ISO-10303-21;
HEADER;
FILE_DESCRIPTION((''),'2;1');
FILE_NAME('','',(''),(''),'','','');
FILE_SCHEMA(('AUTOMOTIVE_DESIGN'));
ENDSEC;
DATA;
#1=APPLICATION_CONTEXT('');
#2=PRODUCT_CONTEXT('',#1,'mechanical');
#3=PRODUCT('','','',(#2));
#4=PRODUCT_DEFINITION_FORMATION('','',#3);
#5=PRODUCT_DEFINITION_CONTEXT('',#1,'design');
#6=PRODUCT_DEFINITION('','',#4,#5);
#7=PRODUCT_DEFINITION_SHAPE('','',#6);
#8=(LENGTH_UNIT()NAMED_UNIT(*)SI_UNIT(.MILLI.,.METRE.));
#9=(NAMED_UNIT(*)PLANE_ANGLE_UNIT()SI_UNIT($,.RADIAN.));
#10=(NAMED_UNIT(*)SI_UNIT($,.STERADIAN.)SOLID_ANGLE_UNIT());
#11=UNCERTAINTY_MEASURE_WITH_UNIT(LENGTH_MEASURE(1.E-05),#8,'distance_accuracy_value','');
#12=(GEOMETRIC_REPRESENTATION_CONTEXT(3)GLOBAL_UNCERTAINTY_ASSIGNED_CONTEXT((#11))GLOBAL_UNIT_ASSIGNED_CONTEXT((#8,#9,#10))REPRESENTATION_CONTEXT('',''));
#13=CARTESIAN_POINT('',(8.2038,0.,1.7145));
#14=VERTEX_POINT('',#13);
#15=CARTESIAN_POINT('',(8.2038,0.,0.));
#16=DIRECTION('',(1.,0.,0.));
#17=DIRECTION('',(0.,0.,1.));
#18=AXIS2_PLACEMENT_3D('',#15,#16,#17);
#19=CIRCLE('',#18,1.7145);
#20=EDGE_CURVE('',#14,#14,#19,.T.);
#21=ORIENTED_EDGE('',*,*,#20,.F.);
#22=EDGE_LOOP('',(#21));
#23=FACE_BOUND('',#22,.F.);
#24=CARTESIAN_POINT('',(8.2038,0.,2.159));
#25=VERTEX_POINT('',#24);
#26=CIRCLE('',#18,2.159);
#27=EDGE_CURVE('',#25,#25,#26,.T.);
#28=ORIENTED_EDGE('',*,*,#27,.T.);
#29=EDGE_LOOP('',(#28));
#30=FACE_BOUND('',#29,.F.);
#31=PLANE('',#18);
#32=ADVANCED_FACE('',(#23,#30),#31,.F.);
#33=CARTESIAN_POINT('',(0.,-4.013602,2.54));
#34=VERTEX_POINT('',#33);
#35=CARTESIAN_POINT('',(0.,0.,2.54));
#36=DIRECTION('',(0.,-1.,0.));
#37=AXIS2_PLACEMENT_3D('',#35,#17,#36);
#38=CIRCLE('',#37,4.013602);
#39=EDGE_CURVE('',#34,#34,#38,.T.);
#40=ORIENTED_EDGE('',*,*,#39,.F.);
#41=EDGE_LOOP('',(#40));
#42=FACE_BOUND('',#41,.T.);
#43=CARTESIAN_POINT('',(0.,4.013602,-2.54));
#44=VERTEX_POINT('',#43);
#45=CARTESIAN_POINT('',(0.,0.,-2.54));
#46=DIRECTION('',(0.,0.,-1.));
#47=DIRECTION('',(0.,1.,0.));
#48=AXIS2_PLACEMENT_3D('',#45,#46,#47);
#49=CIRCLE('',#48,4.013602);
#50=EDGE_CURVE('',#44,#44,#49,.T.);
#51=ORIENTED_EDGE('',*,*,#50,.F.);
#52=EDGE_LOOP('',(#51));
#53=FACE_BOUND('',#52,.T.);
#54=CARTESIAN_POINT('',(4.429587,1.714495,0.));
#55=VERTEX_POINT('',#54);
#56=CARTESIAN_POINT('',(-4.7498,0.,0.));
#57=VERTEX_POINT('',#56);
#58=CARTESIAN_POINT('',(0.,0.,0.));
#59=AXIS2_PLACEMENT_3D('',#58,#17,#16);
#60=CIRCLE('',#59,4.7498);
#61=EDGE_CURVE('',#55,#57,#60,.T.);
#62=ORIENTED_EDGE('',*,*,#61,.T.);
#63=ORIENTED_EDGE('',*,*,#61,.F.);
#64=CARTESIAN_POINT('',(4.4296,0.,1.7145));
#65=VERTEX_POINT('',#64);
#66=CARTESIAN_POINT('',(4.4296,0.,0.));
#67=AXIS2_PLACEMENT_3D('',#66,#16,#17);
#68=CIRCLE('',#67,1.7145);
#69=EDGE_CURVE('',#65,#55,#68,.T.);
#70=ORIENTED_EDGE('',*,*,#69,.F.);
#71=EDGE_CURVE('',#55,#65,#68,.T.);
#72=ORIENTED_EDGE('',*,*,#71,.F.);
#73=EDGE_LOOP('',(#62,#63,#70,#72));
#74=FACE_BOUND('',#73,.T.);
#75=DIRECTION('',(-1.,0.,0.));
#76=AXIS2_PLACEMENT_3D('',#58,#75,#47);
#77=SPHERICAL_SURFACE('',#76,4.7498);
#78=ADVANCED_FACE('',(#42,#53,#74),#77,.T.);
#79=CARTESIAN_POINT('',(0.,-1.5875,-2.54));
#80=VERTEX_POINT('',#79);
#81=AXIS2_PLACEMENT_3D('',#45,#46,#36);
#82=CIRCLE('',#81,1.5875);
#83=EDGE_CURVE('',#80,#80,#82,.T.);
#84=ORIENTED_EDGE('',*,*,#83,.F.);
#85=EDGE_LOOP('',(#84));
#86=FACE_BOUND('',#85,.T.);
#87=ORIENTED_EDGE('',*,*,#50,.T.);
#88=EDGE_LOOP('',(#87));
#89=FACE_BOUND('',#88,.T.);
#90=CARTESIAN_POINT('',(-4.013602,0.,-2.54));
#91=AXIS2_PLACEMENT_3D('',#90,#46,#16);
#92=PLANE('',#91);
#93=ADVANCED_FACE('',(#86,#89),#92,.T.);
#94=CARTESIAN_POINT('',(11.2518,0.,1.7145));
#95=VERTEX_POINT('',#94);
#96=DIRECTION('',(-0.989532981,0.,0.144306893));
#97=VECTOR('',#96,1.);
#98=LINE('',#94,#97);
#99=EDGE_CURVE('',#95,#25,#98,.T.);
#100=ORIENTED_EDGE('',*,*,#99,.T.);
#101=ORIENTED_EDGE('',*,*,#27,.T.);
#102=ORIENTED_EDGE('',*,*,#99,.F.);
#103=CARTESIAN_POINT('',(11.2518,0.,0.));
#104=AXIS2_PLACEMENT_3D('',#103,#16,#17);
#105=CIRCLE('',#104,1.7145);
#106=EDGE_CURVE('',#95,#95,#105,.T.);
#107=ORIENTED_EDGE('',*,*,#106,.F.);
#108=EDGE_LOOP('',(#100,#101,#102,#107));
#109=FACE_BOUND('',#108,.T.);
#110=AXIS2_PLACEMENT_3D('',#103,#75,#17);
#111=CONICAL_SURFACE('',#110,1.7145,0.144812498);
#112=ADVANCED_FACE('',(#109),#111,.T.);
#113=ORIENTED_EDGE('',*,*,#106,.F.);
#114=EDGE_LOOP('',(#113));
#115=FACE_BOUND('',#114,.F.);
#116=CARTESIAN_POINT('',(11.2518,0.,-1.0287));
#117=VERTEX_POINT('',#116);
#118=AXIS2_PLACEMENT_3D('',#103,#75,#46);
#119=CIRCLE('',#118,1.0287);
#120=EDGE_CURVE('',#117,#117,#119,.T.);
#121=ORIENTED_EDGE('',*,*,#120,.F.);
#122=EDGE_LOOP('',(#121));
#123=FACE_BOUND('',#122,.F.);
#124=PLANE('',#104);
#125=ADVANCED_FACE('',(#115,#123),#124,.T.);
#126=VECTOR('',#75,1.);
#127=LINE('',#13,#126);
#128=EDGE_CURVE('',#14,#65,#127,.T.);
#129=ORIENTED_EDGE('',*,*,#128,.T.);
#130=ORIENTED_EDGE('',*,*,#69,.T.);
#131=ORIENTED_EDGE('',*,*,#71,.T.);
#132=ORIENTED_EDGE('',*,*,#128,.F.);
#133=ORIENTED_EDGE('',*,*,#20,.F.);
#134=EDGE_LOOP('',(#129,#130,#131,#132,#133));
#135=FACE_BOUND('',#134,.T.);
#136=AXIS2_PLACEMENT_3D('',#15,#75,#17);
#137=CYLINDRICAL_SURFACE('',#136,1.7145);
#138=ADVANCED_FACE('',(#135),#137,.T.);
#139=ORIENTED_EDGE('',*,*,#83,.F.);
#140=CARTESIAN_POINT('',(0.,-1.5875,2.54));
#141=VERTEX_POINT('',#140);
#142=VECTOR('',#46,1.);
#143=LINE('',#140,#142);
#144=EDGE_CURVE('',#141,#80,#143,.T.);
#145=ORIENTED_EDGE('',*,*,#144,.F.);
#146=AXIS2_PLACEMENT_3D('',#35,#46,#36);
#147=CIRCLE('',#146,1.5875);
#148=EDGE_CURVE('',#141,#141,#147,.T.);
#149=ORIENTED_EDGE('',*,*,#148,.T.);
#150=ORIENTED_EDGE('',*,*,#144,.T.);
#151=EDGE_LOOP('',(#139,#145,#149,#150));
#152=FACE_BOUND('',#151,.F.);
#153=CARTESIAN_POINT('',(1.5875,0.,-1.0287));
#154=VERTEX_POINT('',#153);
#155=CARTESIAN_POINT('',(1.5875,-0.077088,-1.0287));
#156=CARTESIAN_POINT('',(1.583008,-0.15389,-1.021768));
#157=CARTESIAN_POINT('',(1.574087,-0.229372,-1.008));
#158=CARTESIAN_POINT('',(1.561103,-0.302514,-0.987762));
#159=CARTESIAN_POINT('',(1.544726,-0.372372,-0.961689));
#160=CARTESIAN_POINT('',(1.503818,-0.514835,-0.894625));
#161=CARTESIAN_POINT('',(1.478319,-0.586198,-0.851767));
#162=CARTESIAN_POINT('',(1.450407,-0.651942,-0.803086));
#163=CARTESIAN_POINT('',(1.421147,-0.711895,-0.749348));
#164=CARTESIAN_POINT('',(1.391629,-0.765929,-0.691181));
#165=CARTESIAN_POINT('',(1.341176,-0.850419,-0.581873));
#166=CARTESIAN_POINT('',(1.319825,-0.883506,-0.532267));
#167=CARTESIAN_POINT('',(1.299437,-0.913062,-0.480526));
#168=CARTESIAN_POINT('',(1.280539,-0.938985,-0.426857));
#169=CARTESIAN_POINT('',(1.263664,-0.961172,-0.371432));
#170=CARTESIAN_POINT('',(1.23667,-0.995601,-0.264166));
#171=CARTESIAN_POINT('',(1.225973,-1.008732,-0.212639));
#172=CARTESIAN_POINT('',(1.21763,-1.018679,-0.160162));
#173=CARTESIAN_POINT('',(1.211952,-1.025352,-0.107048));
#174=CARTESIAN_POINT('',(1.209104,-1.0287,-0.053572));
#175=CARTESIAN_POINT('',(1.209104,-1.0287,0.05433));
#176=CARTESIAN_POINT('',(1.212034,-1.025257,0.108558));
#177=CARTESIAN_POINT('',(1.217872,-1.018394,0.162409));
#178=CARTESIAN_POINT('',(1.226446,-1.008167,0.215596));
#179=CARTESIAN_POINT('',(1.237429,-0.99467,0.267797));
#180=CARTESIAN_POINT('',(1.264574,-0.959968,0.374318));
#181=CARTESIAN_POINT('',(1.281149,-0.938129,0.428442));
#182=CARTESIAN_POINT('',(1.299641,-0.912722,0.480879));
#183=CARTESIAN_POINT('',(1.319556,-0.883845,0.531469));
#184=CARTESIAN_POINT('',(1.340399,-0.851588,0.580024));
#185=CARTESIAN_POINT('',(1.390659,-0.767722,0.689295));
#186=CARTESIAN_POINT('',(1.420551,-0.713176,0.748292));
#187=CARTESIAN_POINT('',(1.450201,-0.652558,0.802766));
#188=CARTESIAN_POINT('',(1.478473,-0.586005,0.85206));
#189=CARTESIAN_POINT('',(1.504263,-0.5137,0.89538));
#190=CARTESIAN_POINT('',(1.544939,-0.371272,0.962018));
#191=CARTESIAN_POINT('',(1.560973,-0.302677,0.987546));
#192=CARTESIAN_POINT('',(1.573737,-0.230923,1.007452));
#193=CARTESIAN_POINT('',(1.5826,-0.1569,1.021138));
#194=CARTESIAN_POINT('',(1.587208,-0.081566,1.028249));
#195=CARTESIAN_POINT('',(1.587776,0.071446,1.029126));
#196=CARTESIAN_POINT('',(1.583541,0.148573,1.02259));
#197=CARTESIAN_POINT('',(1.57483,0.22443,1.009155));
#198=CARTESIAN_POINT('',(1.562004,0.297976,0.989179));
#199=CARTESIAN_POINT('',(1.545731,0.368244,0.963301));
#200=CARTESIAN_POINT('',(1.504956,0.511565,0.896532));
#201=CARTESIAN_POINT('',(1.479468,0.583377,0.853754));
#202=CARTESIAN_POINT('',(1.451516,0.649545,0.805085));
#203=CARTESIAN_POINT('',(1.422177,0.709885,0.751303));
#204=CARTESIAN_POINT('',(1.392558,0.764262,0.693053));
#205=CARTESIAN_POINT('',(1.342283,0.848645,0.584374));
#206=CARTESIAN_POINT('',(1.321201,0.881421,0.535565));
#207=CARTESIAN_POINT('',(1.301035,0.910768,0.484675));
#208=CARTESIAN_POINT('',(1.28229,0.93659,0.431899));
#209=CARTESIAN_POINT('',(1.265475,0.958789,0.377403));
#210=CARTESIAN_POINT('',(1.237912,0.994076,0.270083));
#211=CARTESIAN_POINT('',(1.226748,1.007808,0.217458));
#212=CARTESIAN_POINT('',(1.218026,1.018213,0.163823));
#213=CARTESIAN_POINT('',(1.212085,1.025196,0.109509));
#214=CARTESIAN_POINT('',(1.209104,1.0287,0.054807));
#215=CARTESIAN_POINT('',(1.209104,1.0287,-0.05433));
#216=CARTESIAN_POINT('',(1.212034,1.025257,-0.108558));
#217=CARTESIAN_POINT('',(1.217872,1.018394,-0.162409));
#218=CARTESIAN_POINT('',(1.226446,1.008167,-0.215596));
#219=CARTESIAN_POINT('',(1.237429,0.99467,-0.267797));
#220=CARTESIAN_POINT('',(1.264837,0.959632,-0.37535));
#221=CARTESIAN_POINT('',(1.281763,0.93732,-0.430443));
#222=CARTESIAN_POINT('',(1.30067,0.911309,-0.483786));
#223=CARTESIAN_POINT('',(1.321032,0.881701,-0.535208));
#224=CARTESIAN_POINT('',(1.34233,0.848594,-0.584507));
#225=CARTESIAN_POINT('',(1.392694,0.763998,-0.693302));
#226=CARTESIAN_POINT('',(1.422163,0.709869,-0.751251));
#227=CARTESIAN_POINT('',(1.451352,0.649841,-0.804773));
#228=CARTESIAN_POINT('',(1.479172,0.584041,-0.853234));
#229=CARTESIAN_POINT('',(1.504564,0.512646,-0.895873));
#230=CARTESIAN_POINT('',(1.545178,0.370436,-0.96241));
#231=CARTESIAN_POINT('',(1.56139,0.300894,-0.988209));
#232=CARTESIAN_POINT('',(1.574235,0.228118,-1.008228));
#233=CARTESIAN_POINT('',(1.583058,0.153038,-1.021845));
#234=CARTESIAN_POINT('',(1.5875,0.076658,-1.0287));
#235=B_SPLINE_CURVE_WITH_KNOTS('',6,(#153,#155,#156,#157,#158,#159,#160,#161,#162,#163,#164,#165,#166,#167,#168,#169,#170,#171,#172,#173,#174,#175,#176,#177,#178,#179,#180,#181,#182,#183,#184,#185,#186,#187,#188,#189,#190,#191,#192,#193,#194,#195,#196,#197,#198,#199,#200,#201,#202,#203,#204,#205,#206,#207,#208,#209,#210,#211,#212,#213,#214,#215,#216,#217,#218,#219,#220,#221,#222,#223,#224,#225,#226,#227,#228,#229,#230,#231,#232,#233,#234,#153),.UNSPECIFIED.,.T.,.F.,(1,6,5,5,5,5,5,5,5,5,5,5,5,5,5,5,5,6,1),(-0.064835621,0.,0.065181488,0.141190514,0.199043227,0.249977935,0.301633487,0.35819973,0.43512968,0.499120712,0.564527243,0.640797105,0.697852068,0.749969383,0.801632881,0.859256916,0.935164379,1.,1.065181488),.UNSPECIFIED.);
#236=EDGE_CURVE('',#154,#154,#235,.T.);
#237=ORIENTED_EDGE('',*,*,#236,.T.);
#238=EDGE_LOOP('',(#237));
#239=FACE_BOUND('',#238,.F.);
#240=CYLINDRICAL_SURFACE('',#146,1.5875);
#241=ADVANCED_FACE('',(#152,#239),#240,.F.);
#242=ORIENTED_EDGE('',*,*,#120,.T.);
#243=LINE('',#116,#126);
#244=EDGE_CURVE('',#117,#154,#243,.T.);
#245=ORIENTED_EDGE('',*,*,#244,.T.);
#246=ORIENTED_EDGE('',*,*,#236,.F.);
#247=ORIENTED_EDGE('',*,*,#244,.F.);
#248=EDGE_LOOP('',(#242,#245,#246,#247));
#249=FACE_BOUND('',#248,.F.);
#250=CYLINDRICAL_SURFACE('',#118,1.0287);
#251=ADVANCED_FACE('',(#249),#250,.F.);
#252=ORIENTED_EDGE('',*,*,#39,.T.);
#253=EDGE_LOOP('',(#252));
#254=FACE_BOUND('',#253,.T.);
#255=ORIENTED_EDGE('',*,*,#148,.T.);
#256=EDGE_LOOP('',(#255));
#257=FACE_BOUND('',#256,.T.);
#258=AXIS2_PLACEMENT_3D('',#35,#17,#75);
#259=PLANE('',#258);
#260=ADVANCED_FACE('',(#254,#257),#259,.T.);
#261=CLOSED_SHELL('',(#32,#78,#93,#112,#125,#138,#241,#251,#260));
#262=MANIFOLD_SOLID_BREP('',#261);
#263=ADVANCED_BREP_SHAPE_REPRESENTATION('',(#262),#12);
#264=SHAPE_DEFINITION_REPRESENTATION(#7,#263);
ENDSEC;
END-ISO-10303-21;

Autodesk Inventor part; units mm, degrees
ref_plane "YZ Plane" through (0, 0, 0) normal (1, 0, 0) x (0, 1, 0)
ref_plane "XZ Plane" through (0, 0, 0) normal (0, 1, 0) x (-1, 0, 0)
ref_plane "XY Plane" through (0, 0, 0) normal (0, 0, 1) x (1, 0, 0)
sketch "Sketch2" plane through (0, 0, 0) normal (0, 0, 1) x (1, 0, 0)
  circle A0 centre (0, 0) radius 4.7498
  line L0 (4.7498, 0) -> (-4.7498, 0)
  dimension "d1" = 4.7498
revolve "Revolution1" add sketch "Sketch2" angle 360 about axis through (4.7498, 0, 0) along (-1, 0, 0) picked at (-0.543, 3.0005) contours L0 A0
sketch "Sketch3" plane through (0, 0, 0) normal (0, 1, 0) x (-1, 0, 0)
  arc A0 (0, 4.7498) -> (0, -4.7498) centre (0, 0) ccw projected
  arc A1 (0, -4.7498) -> (0, 4.7498) centre (0, 0) ccw projected
  line L0 (-4.7498, 2.54) -> (4.7498, 2.54)
  line L1 (4.7498, 2.54) -> (4.7498, -2.54)
  line L2 (4.7498, -2.54) -> (-4.7498, -2.54)
  line L3 (-4.7498, -2.54) -> (-4.7498, 2.54)
  line L4 (0, 0) -> (0, 2.54)
  line L5 (-4.7498, 2.54) -> (4.7498, 2.54)
  line L6 (4.7498, 2.54) -> (4.7498, 4.7498)
  line L7 (4.7498, 4.7498) -> (-4.7498, 4.7498)
  line L8 (-4.7498, 4.7498) -> (-4.7498, 2.54)
  line L9 (-4.7498, -2.54) -> (4.7498, -2.54)
  line L10 (4.7498, -2.54) -> (4.7498, -4.7498)
  line L11 (4.7498, -4.7498) -> (-4.7498, -4.7498)
  line L12 (-4.7498, -4.7498) -> (-4.7498, -2.54)
  dimension "d3" = 5.08
  dimension "d5" = 2.54
extrude "Extrusion1" cut sketch "Sketch3" along normal mid plane 25.4 contours A1 L0 A0 | L7 L6 L0 A1 | A0 L0 L8 L7 | L2 A1 A0 | A0 L11 L12 L2 | L2 L10 L11 A1
sketch "Sketch5" plane through (0, 0, 0) normal (0, 1, 0) x (-1, 0, 0)
  line L0 (4.0136, -2.54) -> (-4.0136, -2.54) projected
  arc A0 (-4.0136, 2.54) -> (-4.0136, -2.54) centre (0, 0) ccw projected
  line L1 (-4.0136, 2.54) -> (4.0136, 2.54) projected
  arc A1 (4.0136, -2.54) -> (4.0136, 2.54) centre (0, 0) ccw projected
  line L2 (0, 0) -> (-18.5035, 0)
  line L3 (-11.2518, 0) -> (-11.2518, 1.7145)
  line L4 (-11.2518, 1.7145) -> (-8.2038, 2.159)
  line L5 (-8.2038, 2.159) -> (-8.2038, 1.7145)
  line L6 (-8.2038, 1.7145) -> (-4.4296, 1.7145)
  line L7 (-4.4296, 1.7145) -> (-4.4296, 0)
  line L8 (-11.2518, 0) -> (-4.4296, 0)
  dimension "d12" = 4.0136
  dimension "d15" = 3.429
  dimension "d16" = 4.318
  dimension "d17" = 15.2654
  dimension "d18" = 12.2174
revolve "Revolution2" add sketch "Sketch5" angle 360 about axis through (0, 0, 0) along (1, 0, 0) contours L2 L3 L4 L5 L6 A0 | A0 L7 L2
sketch "Sketch6" plane through (0, 0, 2.54) normal (0, 0, 1) x (1, 0, 0)
  circle A0 centre (0, 0) radius 4.0136 projected
hole "Hole1" at (0, 0, 2.54) direction (0, 0, -1) diameter 3.175 end through all
sketch "Sketch7" plane through (11.2518, 0, 0) normal (1, 0, 0) x (0, 0, -1)
  circle A0 centre (0, 0) radius 1.7145 projected
hole "Hole2" at (11.2518, 0, 0) direction (-1, 0, 0) diameter 2.0574 end up to surface clearance for "Flat Head Machine Screw (82)" size "#1" standard "Ansi Unified Screw Threads"
equation "\"d5\" = 0.5 * d3"
properties part number "Fuel Intake" material "Nylon, molybdenum disulphide"
